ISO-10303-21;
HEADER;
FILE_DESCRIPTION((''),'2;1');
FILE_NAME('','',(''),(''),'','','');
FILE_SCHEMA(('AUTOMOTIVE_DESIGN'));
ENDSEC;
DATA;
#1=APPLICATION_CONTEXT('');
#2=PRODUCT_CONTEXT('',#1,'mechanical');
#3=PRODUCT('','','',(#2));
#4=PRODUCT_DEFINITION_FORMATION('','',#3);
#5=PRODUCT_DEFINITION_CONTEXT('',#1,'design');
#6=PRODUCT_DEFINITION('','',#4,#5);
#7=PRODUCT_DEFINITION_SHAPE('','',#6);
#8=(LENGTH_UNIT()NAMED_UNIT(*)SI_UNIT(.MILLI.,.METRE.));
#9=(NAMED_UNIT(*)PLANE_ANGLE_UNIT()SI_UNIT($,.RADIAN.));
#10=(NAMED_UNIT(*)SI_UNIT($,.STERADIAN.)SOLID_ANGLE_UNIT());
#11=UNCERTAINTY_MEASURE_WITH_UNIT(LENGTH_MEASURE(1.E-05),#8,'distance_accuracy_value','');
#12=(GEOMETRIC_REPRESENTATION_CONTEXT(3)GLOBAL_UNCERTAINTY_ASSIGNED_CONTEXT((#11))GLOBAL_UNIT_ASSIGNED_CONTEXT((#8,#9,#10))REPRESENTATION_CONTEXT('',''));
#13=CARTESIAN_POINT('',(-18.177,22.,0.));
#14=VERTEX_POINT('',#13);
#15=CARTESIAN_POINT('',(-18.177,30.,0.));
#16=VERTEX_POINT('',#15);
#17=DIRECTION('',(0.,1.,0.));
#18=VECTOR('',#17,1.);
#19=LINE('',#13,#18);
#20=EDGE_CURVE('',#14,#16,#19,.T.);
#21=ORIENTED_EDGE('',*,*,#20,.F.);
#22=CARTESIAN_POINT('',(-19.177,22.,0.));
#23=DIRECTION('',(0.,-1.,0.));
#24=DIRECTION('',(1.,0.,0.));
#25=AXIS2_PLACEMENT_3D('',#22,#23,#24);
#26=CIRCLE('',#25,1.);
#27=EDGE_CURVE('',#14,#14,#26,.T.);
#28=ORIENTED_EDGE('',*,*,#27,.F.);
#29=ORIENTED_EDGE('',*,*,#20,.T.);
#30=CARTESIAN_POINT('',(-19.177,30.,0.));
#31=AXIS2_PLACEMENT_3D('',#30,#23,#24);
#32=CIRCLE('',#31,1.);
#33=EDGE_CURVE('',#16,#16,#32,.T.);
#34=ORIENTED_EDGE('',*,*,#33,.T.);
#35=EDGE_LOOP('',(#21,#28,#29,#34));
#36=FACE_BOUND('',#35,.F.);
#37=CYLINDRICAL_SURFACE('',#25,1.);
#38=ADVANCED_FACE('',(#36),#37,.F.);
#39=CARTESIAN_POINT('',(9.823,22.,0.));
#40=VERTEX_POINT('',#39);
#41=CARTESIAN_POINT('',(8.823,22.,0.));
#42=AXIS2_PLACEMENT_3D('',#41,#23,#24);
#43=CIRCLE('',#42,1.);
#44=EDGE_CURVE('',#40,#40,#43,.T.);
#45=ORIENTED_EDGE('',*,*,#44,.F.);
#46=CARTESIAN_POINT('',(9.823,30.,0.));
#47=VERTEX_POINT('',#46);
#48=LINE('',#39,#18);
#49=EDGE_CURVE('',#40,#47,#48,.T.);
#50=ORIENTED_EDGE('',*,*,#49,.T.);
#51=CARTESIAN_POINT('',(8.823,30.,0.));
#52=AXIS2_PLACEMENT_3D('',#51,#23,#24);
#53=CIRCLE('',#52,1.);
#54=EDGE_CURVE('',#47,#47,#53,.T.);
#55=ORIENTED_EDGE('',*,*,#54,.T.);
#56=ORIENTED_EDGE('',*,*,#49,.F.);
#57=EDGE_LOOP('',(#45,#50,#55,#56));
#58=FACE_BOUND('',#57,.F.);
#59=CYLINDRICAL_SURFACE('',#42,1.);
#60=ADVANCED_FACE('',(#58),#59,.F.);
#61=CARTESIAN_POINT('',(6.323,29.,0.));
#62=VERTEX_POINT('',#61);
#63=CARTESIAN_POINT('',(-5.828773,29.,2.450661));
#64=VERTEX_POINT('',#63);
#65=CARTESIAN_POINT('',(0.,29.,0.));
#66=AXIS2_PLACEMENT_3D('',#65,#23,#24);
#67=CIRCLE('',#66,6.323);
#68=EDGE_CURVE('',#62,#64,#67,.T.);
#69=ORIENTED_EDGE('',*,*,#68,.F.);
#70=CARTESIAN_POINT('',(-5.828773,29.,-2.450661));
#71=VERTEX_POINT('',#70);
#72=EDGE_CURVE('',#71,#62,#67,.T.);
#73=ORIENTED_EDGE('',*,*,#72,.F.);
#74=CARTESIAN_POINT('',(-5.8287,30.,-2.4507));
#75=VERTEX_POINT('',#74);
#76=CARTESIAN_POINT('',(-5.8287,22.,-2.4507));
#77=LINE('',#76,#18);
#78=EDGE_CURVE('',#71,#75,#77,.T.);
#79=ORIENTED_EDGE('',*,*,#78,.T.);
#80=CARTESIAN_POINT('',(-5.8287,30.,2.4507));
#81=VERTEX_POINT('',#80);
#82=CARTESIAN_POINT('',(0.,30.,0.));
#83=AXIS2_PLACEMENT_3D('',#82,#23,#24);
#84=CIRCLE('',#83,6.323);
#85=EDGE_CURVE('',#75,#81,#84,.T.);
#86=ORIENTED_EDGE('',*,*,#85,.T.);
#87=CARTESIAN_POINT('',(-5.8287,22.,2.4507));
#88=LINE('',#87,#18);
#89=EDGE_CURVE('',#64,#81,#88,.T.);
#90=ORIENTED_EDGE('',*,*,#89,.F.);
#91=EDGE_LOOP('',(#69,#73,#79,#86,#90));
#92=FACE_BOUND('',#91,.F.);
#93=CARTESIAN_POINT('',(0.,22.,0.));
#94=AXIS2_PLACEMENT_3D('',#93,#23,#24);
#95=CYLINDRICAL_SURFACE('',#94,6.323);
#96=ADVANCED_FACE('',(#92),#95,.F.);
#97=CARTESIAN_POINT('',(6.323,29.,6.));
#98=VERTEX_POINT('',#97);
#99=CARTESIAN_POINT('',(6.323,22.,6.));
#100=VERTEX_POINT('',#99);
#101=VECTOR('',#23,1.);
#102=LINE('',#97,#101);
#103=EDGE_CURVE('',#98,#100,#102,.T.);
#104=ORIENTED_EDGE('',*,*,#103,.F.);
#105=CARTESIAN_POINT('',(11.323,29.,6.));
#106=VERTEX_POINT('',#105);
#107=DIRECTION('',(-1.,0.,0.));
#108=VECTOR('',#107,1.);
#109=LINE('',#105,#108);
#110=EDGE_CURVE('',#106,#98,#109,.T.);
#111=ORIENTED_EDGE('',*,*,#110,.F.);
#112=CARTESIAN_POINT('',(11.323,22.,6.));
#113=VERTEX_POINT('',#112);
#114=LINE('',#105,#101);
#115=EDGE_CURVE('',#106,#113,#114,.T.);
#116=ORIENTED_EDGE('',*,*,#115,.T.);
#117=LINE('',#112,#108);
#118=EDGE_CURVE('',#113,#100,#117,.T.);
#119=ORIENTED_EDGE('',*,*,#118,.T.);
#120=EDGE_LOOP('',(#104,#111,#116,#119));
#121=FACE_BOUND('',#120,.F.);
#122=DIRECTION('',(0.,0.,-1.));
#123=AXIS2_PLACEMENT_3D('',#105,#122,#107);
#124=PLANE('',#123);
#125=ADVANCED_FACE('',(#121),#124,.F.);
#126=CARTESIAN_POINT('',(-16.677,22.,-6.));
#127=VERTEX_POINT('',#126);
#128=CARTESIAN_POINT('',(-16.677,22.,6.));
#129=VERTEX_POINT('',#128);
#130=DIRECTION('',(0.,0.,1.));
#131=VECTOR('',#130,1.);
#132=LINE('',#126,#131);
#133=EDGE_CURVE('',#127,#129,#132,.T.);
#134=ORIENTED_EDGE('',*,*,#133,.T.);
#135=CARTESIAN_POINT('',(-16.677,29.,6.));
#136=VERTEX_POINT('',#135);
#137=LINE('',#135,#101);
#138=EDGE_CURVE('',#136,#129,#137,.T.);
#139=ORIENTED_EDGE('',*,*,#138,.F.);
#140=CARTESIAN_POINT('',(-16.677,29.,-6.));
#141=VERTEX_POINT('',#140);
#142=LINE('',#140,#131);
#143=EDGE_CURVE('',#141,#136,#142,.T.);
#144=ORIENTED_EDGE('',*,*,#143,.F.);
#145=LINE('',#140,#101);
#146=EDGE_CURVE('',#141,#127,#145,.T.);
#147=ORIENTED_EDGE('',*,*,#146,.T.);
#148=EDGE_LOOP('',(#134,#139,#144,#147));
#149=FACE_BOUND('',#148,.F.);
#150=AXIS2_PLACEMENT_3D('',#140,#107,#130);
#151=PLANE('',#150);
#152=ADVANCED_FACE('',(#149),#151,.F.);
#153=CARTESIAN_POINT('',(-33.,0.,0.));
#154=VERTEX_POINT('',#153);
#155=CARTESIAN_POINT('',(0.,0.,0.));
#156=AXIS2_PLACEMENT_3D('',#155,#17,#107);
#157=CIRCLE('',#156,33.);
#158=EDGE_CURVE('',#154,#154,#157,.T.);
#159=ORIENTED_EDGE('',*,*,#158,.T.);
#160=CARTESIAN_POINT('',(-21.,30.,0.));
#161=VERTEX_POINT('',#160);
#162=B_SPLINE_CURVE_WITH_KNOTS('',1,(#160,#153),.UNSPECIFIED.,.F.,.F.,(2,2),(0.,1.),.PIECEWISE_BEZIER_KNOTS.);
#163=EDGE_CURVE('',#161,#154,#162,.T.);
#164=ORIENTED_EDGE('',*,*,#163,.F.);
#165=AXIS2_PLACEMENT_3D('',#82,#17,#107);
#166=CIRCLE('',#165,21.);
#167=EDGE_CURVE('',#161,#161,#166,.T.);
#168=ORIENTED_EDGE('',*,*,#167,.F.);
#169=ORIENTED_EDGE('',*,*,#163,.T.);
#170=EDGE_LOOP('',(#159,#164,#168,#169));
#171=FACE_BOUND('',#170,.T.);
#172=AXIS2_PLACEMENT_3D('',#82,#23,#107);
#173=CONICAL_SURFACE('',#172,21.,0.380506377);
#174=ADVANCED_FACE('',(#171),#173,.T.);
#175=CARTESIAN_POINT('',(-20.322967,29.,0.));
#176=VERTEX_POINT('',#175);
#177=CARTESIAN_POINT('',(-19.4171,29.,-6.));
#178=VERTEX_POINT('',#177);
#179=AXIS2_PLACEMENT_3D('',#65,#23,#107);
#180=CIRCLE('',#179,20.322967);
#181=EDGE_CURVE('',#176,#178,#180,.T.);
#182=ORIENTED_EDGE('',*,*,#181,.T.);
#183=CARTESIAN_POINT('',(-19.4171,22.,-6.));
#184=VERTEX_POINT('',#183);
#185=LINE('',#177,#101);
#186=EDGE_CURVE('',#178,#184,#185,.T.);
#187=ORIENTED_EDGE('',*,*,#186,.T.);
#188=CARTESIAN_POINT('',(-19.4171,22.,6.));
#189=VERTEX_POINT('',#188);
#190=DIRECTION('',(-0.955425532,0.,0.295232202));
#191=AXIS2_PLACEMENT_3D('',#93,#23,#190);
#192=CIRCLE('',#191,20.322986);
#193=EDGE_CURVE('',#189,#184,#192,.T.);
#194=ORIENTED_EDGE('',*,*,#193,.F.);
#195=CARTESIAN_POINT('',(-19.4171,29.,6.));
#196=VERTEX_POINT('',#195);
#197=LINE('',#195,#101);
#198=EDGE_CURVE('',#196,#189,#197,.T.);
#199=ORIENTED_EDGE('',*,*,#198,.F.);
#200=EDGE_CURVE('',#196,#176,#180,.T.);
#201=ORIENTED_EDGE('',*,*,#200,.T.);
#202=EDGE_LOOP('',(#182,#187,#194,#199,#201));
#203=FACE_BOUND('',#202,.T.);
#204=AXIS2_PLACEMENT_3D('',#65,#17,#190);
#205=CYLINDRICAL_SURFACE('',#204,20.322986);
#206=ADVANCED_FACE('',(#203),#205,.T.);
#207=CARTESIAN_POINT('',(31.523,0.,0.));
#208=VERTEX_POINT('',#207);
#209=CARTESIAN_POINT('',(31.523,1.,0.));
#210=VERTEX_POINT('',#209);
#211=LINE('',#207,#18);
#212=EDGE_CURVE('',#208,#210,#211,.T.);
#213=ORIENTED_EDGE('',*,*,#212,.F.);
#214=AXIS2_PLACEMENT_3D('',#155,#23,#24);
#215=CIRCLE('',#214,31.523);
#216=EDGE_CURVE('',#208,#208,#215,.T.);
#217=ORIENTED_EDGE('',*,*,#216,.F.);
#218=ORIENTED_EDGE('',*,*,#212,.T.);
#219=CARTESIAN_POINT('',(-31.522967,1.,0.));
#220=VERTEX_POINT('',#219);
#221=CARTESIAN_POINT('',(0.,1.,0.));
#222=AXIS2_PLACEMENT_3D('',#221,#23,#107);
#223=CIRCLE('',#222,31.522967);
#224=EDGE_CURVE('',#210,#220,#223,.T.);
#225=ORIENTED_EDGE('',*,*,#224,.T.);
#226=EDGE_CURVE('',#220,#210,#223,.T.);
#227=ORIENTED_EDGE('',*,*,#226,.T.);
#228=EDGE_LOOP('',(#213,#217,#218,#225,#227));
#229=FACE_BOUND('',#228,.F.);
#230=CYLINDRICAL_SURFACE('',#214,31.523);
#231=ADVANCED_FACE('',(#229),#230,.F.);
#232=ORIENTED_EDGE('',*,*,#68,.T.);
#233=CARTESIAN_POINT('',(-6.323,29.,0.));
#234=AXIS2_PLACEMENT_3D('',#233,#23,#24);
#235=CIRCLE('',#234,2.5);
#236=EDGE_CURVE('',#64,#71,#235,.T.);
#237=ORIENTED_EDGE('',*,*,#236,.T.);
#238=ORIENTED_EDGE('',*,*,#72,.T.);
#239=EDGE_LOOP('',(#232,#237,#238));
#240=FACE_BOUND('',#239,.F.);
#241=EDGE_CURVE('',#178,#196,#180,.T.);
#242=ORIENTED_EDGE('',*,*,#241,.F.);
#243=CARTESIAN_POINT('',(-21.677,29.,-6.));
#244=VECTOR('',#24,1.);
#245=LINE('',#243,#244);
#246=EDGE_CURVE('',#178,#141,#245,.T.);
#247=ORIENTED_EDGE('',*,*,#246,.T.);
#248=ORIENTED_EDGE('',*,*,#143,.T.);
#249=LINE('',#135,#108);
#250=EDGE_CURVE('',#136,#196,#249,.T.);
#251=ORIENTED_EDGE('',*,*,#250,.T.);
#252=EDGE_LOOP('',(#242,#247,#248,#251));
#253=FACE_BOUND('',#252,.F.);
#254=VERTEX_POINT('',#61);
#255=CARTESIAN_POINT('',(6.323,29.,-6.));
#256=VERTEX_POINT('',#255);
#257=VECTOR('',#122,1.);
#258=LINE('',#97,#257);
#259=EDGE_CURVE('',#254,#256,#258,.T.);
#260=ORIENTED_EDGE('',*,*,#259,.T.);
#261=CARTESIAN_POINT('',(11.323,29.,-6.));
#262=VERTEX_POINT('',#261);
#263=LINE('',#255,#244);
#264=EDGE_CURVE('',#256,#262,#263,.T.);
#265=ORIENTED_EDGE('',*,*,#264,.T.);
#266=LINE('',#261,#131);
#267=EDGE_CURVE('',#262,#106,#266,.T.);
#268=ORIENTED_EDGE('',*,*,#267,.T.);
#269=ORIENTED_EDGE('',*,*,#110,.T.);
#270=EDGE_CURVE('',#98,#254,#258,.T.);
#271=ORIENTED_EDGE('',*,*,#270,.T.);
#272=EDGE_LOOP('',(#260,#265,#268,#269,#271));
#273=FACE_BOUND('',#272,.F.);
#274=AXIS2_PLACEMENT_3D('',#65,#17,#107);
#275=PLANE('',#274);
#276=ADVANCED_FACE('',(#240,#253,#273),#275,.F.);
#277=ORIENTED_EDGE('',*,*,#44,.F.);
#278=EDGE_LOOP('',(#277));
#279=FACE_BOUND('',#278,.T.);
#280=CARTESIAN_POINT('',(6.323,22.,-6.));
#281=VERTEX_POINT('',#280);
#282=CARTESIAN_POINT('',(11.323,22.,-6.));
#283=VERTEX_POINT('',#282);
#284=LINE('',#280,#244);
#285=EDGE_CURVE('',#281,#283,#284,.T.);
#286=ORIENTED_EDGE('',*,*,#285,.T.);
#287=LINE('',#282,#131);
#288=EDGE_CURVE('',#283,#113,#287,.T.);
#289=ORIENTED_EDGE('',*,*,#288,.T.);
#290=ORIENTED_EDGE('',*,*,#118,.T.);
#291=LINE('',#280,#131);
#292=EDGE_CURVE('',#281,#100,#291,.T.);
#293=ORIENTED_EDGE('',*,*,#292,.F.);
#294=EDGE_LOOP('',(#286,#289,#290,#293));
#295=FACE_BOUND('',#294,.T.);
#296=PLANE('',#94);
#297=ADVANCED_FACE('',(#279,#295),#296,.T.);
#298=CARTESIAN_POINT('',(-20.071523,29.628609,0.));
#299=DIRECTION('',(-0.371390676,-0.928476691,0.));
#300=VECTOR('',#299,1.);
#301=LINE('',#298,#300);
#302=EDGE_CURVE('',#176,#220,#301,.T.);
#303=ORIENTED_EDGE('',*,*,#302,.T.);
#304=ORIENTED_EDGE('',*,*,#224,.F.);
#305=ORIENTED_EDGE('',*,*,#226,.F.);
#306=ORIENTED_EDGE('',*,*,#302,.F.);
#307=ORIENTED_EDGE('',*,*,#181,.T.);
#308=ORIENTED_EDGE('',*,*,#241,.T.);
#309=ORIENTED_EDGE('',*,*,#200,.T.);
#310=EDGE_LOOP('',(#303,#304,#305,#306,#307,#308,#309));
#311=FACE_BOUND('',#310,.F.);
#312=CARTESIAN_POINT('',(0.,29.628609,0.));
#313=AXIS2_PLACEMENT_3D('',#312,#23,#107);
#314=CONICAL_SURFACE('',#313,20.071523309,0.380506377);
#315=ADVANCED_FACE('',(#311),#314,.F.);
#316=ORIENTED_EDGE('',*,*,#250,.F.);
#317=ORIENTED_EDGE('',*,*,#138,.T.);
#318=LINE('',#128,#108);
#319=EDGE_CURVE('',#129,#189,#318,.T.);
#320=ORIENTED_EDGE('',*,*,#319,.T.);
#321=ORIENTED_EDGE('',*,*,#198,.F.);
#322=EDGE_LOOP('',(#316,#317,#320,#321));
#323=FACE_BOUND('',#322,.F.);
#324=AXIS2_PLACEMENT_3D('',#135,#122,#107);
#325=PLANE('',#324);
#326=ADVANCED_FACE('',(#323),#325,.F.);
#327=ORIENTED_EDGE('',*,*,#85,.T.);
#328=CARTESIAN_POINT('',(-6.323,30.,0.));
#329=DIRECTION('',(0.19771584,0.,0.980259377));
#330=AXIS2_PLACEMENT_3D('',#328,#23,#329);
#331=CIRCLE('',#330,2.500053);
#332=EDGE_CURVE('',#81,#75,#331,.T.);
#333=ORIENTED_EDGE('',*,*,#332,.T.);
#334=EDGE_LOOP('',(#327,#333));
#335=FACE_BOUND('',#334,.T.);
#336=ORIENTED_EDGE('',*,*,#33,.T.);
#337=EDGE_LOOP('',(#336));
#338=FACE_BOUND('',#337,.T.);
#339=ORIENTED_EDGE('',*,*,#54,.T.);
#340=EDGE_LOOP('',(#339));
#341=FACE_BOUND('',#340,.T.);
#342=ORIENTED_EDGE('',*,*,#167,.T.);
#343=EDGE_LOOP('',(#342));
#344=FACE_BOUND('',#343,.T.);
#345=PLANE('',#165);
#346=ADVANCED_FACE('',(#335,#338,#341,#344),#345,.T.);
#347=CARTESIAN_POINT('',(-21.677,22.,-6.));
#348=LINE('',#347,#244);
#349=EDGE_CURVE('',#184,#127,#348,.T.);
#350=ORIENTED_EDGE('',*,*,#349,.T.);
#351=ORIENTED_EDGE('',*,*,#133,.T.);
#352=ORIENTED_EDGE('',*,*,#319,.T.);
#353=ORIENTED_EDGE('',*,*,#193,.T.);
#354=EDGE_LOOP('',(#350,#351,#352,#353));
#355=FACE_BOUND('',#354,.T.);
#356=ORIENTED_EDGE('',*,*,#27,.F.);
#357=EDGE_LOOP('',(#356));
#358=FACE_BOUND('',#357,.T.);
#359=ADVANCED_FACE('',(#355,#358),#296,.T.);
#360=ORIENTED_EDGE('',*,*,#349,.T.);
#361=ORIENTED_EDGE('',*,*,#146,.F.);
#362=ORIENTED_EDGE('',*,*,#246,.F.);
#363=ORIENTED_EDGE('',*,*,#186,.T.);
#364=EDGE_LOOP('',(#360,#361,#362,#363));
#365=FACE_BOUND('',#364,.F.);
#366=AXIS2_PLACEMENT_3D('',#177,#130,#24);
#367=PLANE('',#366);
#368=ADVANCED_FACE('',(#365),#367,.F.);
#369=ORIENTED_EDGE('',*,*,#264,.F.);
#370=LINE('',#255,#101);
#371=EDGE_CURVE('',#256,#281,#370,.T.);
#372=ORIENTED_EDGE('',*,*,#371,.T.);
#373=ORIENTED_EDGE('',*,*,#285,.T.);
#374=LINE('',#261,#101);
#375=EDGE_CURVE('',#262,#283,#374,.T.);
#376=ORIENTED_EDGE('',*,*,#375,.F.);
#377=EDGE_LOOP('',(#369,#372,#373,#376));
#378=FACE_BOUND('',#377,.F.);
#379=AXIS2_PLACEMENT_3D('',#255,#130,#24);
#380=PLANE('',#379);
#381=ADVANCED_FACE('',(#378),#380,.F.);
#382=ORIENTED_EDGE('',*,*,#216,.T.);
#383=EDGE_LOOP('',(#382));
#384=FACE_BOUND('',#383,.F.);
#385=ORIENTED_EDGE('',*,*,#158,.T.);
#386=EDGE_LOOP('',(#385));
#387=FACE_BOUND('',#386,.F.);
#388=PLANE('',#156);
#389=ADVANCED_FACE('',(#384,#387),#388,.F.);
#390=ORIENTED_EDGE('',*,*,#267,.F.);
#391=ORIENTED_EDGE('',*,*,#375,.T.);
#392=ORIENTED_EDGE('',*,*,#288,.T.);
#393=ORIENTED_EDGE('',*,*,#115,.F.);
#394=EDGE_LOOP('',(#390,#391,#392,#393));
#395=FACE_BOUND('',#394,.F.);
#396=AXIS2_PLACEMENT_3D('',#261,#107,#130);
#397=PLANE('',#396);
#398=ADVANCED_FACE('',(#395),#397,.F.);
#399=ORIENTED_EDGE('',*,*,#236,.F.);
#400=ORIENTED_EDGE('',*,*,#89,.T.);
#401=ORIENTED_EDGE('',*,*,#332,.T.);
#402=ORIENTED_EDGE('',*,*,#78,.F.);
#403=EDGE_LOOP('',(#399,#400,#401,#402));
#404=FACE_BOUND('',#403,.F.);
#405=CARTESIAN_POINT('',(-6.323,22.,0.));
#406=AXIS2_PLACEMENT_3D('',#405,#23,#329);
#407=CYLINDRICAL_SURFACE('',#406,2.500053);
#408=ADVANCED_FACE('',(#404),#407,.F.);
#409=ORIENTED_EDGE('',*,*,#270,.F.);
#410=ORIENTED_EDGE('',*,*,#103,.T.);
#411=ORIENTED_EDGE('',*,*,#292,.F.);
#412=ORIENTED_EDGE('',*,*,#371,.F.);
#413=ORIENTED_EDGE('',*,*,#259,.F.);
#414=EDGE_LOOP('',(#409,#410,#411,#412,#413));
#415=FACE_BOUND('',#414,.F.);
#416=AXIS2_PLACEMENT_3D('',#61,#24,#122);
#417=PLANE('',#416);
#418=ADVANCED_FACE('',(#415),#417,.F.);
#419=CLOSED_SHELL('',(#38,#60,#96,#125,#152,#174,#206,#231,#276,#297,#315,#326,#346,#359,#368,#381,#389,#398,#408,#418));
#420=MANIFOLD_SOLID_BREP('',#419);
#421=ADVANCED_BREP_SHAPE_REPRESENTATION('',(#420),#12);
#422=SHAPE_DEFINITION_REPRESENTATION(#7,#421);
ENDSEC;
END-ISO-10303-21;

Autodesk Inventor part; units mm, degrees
ref_plane "YZ Plane" through (0, 0, 0) normal (1, 0, 0) x (0, 1, 0)
ref_plane "XY Plane" through (0, 0, 0) normal (0, 0, 1) x (1, 0, 0)
sketch "Sketch1" plane through (0, 0, 0) normal (0, 1, 0) x (-1, 0, 0)
  circle A0 centre (0, 0) radius 32
  circle A1 centre (0, 0) radius 33
  dimension "d0" = 64
  dimension "d1" = 0
  dimension "d2" = 0
  dimension "d3" = 66
ref_plane "Work Plane1" through (0, 30, 0) normal (0, 1, 0) x (-1, 0, 0)
sketch "Sketch2" plane through (0, 30, 0) normal (0, 1, 0) x (-1, 0, 0)
  circle A0 centre (0, 0) radius 20
  circle A1 centre (0, 0) radius 21
  dimension "d5" = 40
  dimension "d6" = 42
loft "Loft1" add profiles "Sketch2", "Sketch1" contours A0 | A1 / A0 | A1
shell "Shell2" thickness 1 removed faces 0
sketch "Sketch3" plane through (0, 0, 0) normal (0, -1, 0) x (1, 0, 0)
  circle A0 centre (0, 0) radius 31.523
extrude "Extrusion1" cut sketch "Sketch3" against normal blind 1
sketch "Sketch5" plane through (0, 29, 0) normal (0, -1, 0) x (1, 0, 0)
  line L0 (11.323, 6) -> (6.323, 6)
  line L1 (6.323, 6) -> (6.323, -6)
  line L2 (6.323, -6) -> (11.323, -6)
  line L3 (11.323, -6) -> (11.323, 6)
  circle A0 centre (0, 0) radius 20.323 projected
  circle A1 centre (0, 0) radius 6.323
  circle A2 centre (-6.323, 0) radius 2.5
  line L4 (-16.677, 6) -> (-21.677, 6)
  line L5 (-21.677, 6) -> (-21.677, -6)
  line L6 (-21.677, -6) -> (-16.677, -6)
  line L7 (-16.677, -6) -> (-16.677, 6)
  arc A3 (-19.4171, 6) -> (-19.4171, -6) centre (0, 0) ccw
  dimension "d16" = 5
  dimension "d17" = 12
  dimension "d18" = 9
  dimension "d19" = 6
  dimension "d20" = 5
  dimension "d21" = 5
  dimension "d22" = 12
  dimension "d23" = 23
extrude "Extrusion2" add sketch "Sketch5" along normal blind 7 contours L3 L2 L1 L0 | A1 A2 | A2 A1 | A1 A2 | L4 L7 L6 A0 picked at (-17.8586, -0.6756)
sketch "Sketch6" plane through (0, 22, 0) normal (0, -1, 0) x (1, 0, 0)
  arc A0 (-5.8287, 2.4507) -> (-5.8287, -2.4507) centre (-6.323, 0) ccw projected
  circle A1 centre (0, 0) radius 6.323
  circle A2 centre (-6.323, 0) radius 2.5
extrude "Extrusion3" cut sketch "Sketch6" against normal blind 20
sketch "Sketch7" plane through (0, 22, 0) normal (0, -1, 0) x (1, 0, 0)
  circle A0 centre (8.823, 0) radius 1
  circle A1 centre (-19.177, 0) radius 1
  line L0 (11.323, -6) -> (11.323, 6) projected
  line L1 (11.323, 6) -> (6.323, 6) projected
  line L2 (-16.677, -6) -> (-16.677, 6) projected
  line L3 (-16.677, 6) -> (-19.4171, 6) projected
  point P0 (0, 0)
  dimension "d28" = 2
  dimension "d29" = 2
  dimension "d30" = 2.5
  dimension "d31" = 6
  dimension "d32" = 2.5
  dimension "d33" = 6
extrude "Extrusion4" cut sketch "Sketch7" against normal blind 20
properties part number "zaklad"
